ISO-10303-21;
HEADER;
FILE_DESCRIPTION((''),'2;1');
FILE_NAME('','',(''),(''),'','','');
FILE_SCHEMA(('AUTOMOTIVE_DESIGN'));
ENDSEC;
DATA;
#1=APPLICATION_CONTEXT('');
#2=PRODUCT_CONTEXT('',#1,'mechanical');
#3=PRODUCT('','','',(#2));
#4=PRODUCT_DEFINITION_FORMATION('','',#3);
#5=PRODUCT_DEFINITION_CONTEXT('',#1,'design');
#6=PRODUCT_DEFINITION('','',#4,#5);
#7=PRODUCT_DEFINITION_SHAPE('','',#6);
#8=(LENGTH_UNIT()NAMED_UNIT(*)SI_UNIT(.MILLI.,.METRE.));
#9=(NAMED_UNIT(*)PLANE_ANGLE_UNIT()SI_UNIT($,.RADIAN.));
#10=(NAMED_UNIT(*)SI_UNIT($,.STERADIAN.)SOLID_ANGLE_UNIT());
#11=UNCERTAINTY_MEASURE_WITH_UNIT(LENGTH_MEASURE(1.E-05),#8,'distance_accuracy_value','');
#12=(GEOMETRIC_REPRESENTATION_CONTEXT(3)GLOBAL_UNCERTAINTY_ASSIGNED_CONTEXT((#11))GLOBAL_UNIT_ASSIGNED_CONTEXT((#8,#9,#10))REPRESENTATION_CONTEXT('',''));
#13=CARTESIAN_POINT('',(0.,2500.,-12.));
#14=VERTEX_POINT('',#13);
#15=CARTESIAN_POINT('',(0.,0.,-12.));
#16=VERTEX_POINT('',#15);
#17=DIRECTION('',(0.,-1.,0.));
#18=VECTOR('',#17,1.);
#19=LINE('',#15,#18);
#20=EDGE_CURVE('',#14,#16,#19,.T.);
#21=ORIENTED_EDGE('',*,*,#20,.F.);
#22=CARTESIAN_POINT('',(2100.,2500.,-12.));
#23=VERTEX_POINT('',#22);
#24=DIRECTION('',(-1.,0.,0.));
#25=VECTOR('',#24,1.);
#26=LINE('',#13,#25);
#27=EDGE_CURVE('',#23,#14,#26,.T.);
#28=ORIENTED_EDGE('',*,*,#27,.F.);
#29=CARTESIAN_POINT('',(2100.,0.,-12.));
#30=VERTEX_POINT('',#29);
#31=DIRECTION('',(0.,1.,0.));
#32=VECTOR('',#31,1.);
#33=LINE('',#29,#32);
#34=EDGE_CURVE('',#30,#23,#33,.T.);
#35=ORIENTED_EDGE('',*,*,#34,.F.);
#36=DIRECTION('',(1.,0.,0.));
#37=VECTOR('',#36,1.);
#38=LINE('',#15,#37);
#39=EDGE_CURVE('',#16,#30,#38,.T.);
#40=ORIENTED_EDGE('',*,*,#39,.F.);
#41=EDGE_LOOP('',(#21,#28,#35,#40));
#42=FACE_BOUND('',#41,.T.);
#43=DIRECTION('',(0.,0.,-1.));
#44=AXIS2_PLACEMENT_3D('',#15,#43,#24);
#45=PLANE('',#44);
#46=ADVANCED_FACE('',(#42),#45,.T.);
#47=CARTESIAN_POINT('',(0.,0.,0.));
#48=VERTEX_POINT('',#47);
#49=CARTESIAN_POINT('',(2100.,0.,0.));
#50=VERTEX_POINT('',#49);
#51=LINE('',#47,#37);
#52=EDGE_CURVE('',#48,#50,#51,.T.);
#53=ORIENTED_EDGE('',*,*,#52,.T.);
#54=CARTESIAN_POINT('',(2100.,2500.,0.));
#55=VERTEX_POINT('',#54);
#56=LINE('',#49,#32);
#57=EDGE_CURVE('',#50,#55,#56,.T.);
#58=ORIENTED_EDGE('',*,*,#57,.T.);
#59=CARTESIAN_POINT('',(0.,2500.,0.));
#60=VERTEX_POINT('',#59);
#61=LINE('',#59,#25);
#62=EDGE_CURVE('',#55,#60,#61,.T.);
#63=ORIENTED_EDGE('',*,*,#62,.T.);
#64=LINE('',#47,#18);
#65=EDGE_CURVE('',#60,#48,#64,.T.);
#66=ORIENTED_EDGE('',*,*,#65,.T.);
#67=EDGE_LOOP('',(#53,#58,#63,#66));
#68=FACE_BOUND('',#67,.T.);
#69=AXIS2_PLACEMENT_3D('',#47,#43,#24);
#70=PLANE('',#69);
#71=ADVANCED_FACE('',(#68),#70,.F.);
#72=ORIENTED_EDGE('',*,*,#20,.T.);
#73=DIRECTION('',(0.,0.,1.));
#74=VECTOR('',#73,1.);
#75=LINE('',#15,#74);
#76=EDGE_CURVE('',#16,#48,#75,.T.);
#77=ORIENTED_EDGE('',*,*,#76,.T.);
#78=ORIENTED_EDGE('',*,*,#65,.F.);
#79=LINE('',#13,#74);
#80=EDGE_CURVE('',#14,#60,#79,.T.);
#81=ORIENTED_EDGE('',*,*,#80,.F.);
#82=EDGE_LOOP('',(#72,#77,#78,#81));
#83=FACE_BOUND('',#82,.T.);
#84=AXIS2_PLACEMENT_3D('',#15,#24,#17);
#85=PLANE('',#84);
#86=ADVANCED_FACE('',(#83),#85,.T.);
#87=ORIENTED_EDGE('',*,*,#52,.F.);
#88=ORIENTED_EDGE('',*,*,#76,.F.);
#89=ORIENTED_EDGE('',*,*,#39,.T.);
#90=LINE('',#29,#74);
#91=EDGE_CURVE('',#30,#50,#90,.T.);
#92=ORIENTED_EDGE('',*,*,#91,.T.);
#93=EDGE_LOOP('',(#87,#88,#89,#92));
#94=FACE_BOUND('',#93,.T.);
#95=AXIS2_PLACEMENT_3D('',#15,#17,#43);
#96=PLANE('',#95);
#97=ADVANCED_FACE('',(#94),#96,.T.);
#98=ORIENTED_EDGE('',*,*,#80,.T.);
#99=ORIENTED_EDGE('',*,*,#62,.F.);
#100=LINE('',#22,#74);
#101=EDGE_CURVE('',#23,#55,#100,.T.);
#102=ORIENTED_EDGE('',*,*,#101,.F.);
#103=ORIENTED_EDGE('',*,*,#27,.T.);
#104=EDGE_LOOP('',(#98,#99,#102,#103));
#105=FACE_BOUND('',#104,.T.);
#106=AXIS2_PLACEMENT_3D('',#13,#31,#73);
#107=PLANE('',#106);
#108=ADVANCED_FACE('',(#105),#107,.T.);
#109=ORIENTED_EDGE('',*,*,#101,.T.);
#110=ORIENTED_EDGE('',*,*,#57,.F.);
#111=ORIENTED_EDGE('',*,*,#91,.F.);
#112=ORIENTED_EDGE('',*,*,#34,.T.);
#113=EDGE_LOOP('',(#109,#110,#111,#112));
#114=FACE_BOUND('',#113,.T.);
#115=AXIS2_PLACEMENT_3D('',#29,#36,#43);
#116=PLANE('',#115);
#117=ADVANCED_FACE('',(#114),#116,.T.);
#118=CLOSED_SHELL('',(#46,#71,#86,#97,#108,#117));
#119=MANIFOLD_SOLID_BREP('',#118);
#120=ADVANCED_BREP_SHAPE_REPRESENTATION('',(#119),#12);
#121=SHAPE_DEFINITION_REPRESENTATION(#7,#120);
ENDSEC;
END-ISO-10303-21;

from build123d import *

# Parameters (mm, degrees)
IZIM1_W            = 2100
IZIM1_H            = 2500
TABAN_FLAN_1_DEPTH = 12


# Sheet-metal steps are written as plain solids
with BuildPart() as part:
    # Çizim1 → Taban-Flanş1 (new body)
    with BuildSketch(Plane.XY):
        with Locations((1050, 1250)):
            Rectangle(IZIM1_W, IZIM1_H)
    extrude(amount=-TABAN_FLAN_1_DEPTH)


solid = part.part
